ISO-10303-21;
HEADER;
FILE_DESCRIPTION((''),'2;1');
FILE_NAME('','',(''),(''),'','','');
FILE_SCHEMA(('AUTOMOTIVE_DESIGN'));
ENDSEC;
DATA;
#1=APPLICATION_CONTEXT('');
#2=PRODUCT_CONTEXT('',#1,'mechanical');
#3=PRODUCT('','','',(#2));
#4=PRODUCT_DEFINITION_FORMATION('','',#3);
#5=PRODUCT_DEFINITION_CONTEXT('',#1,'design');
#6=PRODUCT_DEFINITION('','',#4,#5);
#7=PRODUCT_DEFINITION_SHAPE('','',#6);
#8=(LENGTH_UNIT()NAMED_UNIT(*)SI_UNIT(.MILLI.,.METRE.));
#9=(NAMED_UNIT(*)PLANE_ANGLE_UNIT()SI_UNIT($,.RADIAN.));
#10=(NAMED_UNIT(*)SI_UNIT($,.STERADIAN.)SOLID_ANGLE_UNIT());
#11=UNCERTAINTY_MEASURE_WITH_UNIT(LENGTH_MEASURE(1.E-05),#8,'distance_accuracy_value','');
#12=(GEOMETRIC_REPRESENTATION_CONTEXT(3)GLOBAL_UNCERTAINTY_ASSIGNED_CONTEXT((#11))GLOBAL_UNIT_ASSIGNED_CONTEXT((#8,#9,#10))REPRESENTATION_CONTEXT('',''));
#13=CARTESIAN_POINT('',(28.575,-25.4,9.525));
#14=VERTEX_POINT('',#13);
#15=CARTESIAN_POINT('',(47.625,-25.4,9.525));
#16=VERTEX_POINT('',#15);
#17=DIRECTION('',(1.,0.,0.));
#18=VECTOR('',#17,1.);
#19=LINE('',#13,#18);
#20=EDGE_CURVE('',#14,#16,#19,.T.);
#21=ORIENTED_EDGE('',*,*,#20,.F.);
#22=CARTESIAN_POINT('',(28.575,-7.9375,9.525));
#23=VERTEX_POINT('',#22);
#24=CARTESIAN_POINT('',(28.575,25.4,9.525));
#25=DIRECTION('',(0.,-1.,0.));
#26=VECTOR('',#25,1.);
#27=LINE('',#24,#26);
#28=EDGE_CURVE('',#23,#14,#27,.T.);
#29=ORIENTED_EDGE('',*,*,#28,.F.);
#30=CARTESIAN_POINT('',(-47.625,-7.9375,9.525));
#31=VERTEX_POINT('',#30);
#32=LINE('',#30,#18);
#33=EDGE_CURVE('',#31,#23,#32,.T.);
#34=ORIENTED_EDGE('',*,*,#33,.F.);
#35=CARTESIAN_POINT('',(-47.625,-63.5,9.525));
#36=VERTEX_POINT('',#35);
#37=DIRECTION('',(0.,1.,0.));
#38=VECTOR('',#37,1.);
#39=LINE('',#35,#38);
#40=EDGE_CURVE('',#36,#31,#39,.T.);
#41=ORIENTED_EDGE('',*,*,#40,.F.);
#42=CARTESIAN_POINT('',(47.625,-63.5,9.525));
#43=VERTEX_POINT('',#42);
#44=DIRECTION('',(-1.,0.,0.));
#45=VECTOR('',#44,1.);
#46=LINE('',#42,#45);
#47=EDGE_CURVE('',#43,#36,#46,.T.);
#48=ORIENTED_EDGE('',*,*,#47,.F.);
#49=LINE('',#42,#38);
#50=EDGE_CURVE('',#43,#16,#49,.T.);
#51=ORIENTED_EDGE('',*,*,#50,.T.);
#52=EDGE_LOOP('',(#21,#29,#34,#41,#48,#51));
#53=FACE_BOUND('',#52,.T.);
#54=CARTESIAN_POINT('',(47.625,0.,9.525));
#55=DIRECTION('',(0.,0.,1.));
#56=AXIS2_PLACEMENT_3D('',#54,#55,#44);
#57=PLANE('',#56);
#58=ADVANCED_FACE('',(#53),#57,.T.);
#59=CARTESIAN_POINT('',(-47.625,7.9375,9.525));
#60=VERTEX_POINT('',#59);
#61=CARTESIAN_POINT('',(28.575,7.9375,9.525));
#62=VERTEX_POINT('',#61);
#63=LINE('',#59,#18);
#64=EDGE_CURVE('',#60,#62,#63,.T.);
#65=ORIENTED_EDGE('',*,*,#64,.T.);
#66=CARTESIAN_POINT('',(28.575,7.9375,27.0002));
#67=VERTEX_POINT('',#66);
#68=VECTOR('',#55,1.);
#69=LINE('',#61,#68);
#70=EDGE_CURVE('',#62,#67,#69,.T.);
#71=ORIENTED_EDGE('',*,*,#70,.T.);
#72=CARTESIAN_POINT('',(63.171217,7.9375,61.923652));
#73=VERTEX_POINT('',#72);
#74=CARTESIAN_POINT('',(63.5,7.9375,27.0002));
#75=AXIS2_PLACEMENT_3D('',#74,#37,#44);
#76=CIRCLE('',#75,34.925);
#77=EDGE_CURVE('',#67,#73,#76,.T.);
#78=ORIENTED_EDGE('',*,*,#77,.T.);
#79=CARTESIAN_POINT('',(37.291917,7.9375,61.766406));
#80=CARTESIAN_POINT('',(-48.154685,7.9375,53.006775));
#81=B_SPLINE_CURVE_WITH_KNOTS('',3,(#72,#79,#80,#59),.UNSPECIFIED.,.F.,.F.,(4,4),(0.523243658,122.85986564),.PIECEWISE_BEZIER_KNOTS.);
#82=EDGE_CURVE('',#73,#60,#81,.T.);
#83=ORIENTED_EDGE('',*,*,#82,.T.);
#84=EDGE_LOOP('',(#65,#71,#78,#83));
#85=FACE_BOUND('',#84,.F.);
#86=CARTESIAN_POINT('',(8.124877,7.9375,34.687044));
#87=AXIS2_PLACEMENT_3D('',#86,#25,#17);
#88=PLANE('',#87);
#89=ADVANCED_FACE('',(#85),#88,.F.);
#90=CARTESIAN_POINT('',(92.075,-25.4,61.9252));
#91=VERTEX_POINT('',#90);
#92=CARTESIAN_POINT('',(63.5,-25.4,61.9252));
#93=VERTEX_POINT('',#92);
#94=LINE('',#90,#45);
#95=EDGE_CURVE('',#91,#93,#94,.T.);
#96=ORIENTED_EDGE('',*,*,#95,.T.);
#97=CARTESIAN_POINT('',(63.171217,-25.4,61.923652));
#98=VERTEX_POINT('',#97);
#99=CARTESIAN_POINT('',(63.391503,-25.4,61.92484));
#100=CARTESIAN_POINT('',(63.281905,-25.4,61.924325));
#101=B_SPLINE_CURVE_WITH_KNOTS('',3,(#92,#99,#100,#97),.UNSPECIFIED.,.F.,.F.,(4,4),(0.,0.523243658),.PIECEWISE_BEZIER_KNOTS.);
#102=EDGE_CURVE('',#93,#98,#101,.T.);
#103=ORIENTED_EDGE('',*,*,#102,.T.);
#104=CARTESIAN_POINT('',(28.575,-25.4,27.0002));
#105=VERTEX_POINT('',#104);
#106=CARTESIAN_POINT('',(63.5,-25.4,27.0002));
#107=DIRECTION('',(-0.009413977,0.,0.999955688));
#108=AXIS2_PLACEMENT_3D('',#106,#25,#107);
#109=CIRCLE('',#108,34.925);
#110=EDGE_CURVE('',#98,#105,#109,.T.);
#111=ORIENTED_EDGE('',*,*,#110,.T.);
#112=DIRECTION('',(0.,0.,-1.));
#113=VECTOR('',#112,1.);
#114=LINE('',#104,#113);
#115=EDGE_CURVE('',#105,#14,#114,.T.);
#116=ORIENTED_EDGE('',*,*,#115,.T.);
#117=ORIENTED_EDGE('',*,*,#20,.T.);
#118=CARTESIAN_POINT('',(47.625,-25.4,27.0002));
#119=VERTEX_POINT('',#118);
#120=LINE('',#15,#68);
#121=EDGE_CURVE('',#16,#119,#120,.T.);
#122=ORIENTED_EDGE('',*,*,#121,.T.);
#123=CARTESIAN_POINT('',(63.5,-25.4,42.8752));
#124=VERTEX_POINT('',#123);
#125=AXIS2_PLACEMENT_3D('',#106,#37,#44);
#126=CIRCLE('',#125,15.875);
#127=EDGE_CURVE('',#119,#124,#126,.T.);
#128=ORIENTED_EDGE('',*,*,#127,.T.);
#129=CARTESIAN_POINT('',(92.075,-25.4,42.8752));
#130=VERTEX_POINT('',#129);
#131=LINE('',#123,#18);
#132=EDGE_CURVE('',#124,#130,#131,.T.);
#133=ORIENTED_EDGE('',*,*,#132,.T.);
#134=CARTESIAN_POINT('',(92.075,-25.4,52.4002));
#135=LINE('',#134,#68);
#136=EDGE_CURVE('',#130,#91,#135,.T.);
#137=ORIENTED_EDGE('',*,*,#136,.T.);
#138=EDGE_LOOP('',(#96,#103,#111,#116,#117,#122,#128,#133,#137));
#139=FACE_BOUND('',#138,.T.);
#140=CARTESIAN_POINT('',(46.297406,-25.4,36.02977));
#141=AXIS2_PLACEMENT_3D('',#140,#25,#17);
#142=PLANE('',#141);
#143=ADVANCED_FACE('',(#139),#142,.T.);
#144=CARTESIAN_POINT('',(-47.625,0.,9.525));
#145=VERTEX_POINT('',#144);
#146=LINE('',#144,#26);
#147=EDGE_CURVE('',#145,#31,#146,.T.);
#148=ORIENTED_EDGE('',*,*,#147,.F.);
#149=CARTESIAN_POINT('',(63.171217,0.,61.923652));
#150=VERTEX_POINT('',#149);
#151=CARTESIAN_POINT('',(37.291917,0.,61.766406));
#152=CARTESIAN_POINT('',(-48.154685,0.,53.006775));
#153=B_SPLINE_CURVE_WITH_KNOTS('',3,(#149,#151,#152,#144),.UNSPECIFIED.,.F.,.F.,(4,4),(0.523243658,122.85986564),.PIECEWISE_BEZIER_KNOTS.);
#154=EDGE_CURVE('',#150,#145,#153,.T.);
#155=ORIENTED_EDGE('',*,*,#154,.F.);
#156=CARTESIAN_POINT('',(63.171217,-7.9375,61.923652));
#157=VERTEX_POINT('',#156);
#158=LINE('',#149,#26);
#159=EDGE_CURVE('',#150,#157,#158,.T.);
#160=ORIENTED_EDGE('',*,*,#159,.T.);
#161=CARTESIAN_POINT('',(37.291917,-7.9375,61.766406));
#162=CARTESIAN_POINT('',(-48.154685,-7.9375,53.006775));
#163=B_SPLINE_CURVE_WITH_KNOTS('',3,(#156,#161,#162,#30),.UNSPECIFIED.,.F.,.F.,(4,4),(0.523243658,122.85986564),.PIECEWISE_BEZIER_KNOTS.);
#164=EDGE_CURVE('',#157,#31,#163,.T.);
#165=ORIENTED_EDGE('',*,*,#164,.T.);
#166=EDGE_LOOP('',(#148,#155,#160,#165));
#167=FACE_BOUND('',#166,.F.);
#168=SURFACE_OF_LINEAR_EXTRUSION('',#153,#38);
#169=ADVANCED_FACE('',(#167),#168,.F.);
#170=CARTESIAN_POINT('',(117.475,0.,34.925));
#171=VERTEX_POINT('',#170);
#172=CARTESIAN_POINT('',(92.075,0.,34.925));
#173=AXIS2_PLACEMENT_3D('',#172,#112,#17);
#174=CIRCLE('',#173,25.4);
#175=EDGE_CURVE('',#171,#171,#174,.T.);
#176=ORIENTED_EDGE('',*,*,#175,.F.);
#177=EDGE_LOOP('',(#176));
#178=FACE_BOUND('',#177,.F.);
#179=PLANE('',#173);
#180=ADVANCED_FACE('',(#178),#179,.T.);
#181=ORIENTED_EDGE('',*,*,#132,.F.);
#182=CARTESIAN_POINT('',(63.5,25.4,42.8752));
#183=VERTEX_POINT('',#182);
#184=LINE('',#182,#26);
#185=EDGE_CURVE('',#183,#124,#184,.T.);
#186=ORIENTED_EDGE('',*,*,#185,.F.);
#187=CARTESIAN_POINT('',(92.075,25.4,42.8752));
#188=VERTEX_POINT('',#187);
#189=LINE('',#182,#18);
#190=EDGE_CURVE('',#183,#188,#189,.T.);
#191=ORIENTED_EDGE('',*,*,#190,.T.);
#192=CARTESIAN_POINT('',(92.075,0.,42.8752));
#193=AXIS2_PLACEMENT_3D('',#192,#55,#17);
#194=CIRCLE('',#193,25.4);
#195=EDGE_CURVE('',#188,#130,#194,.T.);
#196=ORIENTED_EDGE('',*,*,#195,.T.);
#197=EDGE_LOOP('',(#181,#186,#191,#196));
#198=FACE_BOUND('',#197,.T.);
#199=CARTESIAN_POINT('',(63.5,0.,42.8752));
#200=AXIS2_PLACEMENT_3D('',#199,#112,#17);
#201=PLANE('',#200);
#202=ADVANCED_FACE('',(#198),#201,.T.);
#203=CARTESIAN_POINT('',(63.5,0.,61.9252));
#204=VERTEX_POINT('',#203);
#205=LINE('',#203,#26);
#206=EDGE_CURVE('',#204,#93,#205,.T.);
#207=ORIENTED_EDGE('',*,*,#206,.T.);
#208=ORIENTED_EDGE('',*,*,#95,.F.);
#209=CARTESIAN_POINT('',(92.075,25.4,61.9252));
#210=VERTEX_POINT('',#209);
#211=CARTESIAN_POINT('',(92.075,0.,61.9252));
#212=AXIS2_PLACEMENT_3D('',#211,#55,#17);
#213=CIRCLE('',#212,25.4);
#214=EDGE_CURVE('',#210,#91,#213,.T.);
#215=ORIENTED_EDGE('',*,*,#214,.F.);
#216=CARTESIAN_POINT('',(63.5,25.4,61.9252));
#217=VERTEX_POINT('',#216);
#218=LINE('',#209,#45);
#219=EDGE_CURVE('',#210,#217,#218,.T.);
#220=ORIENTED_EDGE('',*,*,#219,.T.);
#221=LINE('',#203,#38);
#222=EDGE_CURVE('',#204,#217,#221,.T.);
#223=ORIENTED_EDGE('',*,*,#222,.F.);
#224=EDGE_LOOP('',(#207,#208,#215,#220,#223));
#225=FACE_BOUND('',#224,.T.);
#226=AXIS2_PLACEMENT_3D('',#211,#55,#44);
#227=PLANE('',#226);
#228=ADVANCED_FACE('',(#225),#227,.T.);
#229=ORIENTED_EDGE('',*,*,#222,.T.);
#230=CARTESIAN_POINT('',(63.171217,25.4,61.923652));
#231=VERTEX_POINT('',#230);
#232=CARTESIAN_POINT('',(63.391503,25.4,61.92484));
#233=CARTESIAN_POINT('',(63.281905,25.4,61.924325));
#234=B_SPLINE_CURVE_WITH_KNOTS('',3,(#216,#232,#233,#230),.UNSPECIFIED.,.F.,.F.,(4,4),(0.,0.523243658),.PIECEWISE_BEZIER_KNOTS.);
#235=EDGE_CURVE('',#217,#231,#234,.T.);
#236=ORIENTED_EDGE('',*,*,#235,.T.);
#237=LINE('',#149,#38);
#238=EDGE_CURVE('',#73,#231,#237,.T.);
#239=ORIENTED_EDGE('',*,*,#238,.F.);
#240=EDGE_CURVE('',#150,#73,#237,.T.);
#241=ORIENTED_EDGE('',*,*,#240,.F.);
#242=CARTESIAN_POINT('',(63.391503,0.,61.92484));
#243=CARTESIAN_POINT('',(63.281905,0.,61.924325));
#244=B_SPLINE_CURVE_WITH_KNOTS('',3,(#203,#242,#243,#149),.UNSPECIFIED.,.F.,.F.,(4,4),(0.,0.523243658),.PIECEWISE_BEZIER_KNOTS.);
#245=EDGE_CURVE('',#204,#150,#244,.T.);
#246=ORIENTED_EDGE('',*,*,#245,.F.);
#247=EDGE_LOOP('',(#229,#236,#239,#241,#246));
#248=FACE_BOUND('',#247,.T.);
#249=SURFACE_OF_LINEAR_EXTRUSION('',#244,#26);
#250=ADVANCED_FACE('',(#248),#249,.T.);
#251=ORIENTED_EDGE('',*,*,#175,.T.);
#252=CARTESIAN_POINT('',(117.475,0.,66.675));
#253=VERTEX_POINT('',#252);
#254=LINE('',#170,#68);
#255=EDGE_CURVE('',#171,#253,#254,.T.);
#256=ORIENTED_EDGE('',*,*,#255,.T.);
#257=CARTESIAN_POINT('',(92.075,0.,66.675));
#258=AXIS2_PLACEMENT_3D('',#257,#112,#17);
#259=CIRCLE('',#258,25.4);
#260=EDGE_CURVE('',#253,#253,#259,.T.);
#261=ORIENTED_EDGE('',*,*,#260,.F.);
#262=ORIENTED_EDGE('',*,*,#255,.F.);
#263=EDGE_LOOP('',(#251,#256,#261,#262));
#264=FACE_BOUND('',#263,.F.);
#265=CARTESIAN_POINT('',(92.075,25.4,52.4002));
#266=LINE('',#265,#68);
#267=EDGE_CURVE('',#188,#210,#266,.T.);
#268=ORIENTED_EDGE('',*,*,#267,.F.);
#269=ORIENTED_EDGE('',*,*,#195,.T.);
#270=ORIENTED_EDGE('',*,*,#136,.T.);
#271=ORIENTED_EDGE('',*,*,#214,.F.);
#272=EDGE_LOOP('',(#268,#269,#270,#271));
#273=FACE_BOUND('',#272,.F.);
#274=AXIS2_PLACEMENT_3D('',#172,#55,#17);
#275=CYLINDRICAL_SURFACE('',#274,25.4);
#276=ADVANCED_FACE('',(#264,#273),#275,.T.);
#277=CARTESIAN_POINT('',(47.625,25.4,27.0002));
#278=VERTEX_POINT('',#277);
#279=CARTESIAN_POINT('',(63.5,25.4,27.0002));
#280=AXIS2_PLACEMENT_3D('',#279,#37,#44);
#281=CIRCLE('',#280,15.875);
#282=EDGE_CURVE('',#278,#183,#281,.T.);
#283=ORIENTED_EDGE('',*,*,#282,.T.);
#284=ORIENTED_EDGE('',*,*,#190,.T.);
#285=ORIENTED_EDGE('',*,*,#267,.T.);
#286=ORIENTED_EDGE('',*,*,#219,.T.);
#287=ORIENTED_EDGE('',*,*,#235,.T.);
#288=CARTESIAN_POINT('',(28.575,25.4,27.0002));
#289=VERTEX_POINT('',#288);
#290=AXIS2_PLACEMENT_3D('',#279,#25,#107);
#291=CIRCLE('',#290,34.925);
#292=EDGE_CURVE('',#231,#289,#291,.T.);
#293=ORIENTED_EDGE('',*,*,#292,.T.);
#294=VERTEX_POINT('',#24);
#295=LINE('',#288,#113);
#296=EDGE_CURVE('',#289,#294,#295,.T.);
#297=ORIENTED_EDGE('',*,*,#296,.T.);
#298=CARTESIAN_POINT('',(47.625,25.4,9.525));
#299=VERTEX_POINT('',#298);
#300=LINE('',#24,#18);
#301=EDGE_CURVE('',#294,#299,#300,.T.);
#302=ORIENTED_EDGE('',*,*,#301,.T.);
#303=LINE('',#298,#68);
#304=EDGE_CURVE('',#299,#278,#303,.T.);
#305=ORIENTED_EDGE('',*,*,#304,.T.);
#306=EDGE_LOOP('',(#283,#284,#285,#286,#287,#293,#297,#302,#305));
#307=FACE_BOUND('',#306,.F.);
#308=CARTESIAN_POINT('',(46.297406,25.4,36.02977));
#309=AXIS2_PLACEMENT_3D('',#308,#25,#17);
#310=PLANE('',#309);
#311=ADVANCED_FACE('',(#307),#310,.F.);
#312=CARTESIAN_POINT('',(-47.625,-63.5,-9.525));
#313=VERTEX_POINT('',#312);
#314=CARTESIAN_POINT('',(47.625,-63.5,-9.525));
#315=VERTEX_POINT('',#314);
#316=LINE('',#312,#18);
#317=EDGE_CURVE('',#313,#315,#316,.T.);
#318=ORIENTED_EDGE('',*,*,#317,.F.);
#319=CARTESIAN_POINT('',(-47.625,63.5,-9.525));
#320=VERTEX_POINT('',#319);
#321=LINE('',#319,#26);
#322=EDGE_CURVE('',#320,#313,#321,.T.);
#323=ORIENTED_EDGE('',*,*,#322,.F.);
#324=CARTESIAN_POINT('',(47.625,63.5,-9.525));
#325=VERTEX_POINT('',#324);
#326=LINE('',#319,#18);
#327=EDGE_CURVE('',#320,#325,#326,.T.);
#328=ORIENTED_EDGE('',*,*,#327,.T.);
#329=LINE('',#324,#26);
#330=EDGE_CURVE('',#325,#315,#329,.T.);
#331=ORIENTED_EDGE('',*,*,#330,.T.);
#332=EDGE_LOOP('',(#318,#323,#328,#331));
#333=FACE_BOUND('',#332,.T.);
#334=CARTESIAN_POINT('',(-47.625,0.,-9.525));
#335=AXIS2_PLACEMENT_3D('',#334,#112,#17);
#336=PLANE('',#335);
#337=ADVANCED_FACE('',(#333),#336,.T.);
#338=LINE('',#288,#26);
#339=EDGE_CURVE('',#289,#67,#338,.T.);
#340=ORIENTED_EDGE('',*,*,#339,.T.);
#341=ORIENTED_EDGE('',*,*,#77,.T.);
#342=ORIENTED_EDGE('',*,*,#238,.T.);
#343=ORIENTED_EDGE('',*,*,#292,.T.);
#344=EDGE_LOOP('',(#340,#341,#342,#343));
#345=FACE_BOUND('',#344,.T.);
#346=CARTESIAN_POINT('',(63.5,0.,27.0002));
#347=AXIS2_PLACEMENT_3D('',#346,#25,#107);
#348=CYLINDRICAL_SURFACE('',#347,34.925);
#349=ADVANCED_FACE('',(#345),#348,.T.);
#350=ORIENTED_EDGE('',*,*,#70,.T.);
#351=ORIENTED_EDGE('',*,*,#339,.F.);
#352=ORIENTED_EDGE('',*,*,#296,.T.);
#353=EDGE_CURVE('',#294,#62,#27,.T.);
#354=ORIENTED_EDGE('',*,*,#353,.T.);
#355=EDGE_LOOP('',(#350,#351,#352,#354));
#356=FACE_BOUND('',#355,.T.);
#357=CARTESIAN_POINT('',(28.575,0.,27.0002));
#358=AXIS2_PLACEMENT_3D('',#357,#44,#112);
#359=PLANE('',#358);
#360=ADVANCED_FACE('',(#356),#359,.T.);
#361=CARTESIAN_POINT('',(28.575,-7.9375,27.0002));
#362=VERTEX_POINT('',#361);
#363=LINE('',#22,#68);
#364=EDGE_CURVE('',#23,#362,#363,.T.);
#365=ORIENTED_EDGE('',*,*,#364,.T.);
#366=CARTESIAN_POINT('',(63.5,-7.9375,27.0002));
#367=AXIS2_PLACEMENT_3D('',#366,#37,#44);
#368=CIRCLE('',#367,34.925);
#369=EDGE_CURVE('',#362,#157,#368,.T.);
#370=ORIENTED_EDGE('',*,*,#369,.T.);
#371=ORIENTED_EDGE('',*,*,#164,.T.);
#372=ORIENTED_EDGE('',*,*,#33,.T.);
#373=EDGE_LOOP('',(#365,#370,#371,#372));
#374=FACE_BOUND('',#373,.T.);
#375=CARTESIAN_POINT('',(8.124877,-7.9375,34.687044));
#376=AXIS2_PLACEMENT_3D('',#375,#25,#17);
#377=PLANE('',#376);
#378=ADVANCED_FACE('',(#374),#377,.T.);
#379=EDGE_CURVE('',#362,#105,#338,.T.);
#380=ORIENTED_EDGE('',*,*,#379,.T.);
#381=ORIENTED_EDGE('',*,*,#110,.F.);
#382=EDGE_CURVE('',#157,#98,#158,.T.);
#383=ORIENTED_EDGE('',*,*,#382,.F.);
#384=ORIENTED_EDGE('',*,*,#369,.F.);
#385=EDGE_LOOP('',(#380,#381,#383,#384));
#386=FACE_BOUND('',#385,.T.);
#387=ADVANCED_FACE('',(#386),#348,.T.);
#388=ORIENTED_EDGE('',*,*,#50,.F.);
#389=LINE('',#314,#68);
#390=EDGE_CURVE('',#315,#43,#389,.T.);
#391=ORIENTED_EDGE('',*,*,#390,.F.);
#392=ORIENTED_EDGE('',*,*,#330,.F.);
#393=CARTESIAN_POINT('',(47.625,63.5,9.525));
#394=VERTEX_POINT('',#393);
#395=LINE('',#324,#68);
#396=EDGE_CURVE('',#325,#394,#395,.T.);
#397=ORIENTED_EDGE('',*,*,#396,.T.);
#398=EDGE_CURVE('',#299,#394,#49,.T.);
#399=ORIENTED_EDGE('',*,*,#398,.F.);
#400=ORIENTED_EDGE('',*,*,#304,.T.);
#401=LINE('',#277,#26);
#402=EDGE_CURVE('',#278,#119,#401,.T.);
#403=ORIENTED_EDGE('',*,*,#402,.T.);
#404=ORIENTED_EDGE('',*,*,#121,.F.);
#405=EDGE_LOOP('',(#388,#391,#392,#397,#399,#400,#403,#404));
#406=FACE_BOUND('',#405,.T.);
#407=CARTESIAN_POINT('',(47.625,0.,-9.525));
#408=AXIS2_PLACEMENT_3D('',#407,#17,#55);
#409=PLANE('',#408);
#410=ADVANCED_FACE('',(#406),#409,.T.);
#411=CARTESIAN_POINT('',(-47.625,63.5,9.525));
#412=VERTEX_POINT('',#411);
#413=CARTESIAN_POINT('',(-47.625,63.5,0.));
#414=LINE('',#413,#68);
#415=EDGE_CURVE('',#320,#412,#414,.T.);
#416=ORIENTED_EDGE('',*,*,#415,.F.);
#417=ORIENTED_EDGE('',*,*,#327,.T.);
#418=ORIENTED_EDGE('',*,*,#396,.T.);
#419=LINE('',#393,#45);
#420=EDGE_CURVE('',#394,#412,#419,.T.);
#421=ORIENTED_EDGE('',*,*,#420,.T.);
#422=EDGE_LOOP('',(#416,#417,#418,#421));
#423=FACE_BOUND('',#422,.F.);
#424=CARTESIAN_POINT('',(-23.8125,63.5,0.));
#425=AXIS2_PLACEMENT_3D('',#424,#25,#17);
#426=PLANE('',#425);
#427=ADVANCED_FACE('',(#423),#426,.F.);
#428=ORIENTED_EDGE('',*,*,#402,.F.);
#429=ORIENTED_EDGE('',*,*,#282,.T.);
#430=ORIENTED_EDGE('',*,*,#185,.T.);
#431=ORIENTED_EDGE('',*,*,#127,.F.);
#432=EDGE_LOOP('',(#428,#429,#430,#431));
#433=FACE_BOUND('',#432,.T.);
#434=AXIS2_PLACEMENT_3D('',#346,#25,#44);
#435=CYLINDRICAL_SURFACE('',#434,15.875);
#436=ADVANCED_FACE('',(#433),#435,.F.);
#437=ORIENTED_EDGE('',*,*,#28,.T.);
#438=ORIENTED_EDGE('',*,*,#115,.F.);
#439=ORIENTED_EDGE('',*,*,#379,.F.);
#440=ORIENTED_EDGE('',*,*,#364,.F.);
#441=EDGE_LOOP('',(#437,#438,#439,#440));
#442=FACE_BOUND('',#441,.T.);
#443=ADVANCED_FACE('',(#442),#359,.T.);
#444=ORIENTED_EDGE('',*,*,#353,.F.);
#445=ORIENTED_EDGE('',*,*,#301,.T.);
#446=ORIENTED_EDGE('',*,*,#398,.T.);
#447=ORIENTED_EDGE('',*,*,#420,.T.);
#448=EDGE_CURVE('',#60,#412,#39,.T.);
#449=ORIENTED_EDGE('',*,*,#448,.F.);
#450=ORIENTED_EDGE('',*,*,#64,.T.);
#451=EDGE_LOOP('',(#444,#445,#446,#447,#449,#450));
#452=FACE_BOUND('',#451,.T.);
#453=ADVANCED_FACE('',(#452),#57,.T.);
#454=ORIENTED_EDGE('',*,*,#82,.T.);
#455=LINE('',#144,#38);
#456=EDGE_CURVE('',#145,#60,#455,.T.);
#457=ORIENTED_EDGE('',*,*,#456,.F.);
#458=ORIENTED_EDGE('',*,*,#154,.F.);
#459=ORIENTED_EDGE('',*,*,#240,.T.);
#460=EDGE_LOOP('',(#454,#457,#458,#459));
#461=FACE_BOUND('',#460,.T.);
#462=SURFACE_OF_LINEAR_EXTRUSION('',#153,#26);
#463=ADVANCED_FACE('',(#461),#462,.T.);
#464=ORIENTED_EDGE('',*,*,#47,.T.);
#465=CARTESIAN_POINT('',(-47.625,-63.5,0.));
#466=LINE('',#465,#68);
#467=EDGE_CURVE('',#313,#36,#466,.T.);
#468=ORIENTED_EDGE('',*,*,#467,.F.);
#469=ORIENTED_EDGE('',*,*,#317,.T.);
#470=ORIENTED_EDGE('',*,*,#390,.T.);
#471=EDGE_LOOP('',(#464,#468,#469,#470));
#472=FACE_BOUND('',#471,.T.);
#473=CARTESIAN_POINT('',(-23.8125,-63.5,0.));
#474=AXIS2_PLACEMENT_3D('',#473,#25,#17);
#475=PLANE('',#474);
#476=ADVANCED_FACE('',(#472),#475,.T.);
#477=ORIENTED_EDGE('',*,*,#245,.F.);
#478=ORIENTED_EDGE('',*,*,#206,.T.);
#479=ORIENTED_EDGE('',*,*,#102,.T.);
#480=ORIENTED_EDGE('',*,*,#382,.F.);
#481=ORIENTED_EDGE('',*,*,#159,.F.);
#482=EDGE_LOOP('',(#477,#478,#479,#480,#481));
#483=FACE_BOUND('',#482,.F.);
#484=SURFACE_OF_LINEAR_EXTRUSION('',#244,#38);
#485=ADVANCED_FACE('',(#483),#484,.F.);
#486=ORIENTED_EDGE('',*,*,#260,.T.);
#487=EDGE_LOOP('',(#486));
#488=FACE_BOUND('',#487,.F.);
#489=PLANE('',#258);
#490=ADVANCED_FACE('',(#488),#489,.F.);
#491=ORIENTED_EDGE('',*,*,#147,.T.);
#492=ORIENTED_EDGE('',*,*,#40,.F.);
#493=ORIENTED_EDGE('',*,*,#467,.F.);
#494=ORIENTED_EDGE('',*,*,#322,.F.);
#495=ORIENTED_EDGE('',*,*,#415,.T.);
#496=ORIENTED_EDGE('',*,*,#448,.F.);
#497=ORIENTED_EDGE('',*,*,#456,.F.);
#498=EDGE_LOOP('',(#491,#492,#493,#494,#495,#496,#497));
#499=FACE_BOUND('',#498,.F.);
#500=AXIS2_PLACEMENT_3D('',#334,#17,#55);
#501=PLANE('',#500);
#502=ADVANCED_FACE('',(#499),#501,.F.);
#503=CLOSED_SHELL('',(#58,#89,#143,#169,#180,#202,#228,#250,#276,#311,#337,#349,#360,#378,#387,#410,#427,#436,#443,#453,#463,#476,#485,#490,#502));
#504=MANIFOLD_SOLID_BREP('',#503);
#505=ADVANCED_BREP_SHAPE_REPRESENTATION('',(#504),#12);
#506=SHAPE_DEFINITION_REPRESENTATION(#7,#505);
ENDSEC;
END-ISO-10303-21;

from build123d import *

# Parameters (mm, degrees)
F0_W     = 47.625
F0_H     = 19.05
F1_DEPTH = 63.5
F0_W_2   = 25.4
F2_DEPTH = 25.4
F3_DEPTH = 7.9375


# Not quite as in the source:
# - a feature of the source that left no trace in its solid (it failed there, or was rolled back) is left out


with BuildPart() as f1:
    # F0 (on Front) → F1 (new body, symmetric)
    with BuildSketch(Plane.XZ):
        with Locations((-23.8125, 0)):
            Rectangle(F0_W, F0_H)
        Polygon((28.575, 9.525), (0, 9.525), (0, -9.525), (47.625, -9.525), (47.625, 9.525), align=None)
    extrude(amount=F1_DEPTH, both=True)

    # F0 (on Front) → F2 (join, symmetric)
    with BuildSketch(Plane.XZ):
        with BuildLine():
            add(Edge.make_bspline(
                [(63.5, 61.9252), (63.391502904, 61.9248401337), (63.2819047305, 61.9243249441), (63.1712168671, 61.9236523874)],
                knots=[0, 0, 0, 0, 0.5232436579, 0.5232436579, 0.5232436579, 0.5232436579], degree=3))
            ThreePointArc((63.1712168671, 61.9236523874), (38.6883255712, 51.5793870704), (28.575, 27.0002))
            Line((28.575, 27.0002), (28.575, 9.525))
            Line((28.575, 9.525), (47.625, 9.525))
            Line((47.625, 9.525), (47.625, 27.0002))
            ThreePointArc((47.625, 27.0002), (52.2746798487, 38.2255201513), (63.5, 42.8752))
            Line((63.5, 42.8752), (66.675, 42.8752))
            Line((66.675, 42.8752), (66.675, 61.9252))
            Line((66.675, 61.9252), (63.5, 61.9252))
        make_face()
        with Locations((79.375, 52.4002)):
            Rectangle(F0_W_2, F0_H)
    extrude(amount=F2_DEPTH, both=True)

    # F0 (on Front) → F3 (join, symmetric)
    with BuildSketch(Plane.XZ):
        with BuildLine():
            add(Edge.make_bspline(
                [(63.1712168671, 61.9236523874), (37.2919174266, 61.7664057285), (-48.1546851166, 53.0067745419), (-47.625, 9.525)],
                knots=[0.5232436579, 0.5232436579, 0.5232436579, 0.5232436579, 122.8598656398, 122.8598656398, 122.8598656398, 122.8598656398], degree=3))
            Line((-47.625, 9.525), (0, 9.525))
            Line((0, 9.525), (28.575, 9.525))
            Line((28.575, 9.525), (28.575, 27.0002))
            ThreePointArc((28.575, 27.0002), (38.6883255712, 51.5793870704), (63.1712168671, 61.9236523874))
        make_face()
    extrude(amount=F3_DEPTH, both=True)

    # F0 (on Front) → F4 (revolve)
    with BuildSketch(Plane.XZ):
        Polygon((92.075, 66.675), (92.075, 61.9252), (92.075, 42.8752), (92.075, 34.925), (117.475, 34.925), (117.475, 66.675), align=None)
    revolve(axis=Axis((92.075, 0, 50.8), (0, 0, -1)))


solid = f1.part
